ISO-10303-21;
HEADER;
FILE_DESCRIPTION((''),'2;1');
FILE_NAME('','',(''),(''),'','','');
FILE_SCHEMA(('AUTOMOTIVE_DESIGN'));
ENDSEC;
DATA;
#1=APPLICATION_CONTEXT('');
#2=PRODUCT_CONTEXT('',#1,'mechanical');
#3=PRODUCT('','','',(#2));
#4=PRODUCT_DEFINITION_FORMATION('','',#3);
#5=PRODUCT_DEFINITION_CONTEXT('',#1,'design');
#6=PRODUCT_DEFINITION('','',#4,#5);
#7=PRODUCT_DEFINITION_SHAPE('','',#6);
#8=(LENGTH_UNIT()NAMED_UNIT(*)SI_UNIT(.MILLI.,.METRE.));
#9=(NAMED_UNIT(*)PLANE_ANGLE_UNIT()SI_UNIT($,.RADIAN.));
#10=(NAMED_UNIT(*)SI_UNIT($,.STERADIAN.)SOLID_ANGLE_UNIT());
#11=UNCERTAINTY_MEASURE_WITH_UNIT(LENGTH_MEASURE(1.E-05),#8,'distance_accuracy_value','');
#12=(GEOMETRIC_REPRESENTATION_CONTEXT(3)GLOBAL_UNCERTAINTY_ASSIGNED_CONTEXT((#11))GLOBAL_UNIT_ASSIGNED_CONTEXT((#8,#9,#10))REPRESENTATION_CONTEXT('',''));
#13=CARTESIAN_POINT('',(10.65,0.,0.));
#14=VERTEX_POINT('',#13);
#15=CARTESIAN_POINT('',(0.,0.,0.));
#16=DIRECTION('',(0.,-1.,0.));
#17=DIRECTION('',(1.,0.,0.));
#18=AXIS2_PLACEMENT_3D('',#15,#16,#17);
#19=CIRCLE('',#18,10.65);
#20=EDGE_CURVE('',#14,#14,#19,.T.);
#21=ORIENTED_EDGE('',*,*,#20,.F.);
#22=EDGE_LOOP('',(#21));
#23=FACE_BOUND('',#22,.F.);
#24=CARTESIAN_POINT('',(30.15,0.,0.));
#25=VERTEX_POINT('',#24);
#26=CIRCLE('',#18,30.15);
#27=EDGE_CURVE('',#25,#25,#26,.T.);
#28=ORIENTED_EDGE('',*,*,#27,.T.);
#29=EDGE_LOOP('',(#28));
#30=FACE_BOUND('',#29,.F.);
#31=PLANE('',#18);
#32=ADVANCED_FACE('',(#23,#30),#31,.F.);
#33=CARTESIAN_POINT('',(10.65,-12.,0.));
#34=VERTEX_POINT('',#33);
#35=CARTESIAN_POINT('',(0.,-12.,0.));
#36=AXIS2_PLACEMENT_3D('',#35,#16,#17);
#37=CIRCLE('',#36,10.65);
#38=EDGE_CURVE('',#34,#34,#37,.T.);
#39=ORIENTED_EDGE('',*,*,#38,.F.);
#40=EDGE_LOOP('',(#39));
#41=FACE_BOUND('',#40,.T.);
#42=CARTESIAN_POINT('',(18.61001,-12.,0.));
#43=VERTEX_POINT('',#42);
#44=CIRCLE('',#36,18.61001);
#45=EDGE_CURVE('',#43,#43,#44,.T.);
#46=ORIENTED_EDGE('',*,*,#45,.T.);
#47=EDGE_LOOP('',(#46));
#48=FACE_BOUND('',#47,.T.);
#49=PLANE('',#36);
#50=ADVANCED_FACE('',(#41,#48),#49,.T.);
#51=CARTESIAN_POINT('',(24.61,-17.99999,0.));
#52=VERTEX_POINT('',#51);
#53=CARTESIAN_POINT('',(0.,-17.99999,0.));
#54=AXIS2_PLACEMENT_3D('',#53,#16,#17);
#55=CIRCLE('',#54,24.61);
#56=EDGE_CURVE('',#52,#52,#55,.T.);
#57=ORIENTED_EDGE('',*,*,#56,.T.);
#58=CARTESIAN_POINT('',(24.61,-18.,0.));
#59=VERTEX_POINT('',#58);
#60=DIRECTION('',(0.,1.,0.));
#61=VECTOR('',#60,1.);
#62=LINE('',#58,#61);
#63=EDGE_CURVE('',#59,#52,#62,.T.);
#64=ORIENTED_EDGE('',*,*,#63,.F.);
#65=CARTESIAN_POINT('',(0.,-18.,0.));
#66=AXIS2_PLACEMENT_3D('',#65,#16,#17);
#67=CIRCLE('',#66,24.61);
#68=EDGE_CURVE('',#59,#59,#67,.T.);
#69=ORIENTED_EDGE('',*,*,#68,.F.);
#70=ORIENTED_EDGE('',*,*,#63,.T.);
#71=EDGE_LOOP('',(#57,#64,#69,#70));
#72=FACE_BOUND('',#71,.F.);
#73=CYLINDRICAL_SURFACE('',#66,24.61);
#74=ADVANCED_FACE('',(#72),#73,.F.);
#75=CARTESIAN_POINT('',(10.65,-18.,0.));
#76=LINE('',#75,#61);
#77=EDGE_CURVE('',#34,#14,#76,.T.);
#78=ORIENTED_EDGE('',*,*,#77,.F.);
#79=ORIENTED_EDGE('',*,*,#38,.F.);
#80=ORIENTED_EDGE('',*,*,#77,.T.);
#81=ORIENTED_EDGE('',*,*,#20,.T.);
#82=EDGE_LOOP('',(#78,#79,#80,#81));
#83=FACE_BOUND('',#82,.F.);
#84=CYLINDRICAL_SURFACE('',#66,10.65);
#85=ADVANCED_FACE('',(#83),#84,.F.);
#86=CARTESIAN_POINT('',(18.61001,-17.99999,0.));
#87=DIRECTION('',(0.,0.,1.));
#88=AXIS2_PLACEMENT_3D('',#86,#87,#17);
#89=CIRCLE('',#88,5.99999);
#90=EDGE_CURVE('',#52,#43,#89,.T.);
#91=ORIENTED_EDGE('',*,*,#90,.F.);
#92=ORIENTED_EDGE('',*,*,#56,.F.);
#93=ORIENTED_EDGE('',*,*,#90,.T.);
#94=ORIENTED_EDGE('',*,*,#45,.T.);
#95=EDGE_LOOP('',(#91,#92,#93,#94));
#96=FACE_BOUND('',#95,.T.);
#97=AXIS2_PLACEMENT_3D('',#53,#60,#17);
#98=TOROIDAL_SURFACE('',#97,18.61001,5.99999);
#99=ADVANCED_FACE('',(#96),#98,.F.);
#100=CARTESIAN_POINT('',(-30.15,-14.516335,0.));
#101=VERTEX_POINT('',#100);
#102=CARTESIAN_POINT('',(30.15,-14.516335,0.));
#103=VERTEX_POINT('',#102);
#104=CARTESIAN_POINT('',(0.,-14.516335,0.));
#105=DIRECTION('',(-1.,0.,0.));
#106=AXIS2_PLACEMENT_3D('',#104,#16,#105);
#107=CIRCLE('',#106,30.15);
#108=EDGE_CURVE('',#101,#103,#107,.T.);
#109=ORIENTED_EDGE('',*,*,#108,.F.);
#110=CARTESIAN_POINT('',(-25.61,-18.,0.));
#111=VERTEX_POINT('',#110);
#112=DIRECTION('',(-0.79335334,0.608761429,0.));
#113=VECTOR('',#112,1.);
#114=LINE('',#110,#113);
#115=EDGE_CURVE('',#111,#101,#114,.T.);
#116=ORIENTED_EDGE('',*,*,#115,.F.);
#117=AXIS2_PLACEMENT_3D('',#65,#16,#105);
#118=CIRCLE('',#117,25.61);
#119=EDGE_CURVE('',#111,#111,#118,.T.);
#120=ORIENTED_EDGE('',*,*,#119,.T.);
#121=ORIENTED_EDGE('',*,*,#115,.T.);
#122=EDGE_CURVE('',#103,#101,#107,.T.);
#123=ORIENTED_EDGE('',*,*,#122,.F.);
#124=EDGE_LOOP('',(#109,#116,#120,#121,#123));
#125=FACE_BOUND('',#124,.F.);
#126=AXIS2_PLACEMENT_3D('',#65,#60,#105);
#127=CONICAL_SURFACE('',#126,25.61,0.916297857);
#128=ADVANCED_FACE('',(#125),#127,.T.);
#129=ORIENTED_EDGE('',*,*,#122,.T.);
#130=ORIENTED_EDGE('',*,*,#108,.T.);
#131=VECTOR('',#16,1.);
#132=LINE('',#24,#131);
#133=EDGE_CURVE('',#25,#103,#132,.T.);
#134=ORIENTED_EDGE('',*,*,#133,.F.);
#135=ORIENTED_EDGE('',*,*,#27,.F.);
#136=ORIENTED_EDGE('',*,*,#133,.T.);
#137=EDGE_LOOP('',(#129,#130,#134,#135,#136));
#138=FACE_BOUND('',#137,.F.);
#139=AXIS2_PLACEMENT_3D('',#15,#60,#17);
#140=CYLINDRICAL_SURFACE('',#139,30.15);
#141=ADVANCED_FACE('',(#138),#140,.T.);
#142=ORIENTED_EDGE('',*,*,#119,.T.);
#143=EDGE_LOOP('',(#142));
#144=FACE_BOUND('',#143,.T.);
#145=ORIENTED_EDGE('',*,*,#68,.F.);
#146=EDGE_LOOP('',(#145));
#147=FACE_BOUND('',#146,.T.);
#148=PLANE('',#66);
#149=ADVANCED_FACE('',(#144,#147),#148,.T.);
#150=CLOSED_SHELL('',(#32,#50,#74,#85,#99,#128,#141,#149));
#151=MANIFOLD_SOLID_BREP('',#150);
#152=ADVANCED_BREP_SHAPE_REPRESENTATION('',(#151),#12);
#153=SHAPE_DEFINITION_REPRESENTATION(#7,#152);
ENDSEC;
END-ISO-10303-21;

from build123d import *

# Parameters (mm, degrees)
F0_R     = 30.15
F1_DEPTH = 18
F3_R     = 24.61
F4_DEPTH = 6
F5_R     = 5.99999
F6_R     = 10.65
F7_DEPTH = 25


# Not quite as in the source:
# - a fillet or chamfer is up to 0.001 mm smaller than in the source, because OpenCascade refuses the exact size


with BuildPart() as f1:
    # F0 (on Front) → F1 (new body)
    with BuildSketch(Plane.XZ):
        Circle(F0_R)
    extrude(amount=F1_DEPTH)

    # F3 (on face) → F4 (cut)
    with BuildSketch(Plane.XZ.offset(18)):
        Circle(F3_R)
    extrude(amount=-F4_DEPTH, mode=Mode.SUBTRACT)

    # F5 (radius 6 in the source; OpenCascade refuses exactly that, so slightly less here)
    f5_edges = [f1.edges().sort_by_distance(p)[0] for p in [
        (-24.61, -12, 0),
    ]]
    fillet(f5_edges, radius=F5_R)

    # F6 (on face) → F7 (cut)
    with BuildSketch(Plane.XZ.offset(18)):
        Circle(F6_R)
    extrude(amount=-F7_DEPTH, mode=Mode.SUBTRACT)

    # F8 (on Top) → F9 (revolve, cut)
    with BuildSketch(Plane.XY):
        Polygon((-30.15, -18.1521177292), (-25.61, -18), (-30.15, -14.5163354746), align=None)
    revolve(axis=Axis((0, -3.379675094, 0), (0, -1, 0)), mode=Mode.SUBTRACT)


solid = f1.part
